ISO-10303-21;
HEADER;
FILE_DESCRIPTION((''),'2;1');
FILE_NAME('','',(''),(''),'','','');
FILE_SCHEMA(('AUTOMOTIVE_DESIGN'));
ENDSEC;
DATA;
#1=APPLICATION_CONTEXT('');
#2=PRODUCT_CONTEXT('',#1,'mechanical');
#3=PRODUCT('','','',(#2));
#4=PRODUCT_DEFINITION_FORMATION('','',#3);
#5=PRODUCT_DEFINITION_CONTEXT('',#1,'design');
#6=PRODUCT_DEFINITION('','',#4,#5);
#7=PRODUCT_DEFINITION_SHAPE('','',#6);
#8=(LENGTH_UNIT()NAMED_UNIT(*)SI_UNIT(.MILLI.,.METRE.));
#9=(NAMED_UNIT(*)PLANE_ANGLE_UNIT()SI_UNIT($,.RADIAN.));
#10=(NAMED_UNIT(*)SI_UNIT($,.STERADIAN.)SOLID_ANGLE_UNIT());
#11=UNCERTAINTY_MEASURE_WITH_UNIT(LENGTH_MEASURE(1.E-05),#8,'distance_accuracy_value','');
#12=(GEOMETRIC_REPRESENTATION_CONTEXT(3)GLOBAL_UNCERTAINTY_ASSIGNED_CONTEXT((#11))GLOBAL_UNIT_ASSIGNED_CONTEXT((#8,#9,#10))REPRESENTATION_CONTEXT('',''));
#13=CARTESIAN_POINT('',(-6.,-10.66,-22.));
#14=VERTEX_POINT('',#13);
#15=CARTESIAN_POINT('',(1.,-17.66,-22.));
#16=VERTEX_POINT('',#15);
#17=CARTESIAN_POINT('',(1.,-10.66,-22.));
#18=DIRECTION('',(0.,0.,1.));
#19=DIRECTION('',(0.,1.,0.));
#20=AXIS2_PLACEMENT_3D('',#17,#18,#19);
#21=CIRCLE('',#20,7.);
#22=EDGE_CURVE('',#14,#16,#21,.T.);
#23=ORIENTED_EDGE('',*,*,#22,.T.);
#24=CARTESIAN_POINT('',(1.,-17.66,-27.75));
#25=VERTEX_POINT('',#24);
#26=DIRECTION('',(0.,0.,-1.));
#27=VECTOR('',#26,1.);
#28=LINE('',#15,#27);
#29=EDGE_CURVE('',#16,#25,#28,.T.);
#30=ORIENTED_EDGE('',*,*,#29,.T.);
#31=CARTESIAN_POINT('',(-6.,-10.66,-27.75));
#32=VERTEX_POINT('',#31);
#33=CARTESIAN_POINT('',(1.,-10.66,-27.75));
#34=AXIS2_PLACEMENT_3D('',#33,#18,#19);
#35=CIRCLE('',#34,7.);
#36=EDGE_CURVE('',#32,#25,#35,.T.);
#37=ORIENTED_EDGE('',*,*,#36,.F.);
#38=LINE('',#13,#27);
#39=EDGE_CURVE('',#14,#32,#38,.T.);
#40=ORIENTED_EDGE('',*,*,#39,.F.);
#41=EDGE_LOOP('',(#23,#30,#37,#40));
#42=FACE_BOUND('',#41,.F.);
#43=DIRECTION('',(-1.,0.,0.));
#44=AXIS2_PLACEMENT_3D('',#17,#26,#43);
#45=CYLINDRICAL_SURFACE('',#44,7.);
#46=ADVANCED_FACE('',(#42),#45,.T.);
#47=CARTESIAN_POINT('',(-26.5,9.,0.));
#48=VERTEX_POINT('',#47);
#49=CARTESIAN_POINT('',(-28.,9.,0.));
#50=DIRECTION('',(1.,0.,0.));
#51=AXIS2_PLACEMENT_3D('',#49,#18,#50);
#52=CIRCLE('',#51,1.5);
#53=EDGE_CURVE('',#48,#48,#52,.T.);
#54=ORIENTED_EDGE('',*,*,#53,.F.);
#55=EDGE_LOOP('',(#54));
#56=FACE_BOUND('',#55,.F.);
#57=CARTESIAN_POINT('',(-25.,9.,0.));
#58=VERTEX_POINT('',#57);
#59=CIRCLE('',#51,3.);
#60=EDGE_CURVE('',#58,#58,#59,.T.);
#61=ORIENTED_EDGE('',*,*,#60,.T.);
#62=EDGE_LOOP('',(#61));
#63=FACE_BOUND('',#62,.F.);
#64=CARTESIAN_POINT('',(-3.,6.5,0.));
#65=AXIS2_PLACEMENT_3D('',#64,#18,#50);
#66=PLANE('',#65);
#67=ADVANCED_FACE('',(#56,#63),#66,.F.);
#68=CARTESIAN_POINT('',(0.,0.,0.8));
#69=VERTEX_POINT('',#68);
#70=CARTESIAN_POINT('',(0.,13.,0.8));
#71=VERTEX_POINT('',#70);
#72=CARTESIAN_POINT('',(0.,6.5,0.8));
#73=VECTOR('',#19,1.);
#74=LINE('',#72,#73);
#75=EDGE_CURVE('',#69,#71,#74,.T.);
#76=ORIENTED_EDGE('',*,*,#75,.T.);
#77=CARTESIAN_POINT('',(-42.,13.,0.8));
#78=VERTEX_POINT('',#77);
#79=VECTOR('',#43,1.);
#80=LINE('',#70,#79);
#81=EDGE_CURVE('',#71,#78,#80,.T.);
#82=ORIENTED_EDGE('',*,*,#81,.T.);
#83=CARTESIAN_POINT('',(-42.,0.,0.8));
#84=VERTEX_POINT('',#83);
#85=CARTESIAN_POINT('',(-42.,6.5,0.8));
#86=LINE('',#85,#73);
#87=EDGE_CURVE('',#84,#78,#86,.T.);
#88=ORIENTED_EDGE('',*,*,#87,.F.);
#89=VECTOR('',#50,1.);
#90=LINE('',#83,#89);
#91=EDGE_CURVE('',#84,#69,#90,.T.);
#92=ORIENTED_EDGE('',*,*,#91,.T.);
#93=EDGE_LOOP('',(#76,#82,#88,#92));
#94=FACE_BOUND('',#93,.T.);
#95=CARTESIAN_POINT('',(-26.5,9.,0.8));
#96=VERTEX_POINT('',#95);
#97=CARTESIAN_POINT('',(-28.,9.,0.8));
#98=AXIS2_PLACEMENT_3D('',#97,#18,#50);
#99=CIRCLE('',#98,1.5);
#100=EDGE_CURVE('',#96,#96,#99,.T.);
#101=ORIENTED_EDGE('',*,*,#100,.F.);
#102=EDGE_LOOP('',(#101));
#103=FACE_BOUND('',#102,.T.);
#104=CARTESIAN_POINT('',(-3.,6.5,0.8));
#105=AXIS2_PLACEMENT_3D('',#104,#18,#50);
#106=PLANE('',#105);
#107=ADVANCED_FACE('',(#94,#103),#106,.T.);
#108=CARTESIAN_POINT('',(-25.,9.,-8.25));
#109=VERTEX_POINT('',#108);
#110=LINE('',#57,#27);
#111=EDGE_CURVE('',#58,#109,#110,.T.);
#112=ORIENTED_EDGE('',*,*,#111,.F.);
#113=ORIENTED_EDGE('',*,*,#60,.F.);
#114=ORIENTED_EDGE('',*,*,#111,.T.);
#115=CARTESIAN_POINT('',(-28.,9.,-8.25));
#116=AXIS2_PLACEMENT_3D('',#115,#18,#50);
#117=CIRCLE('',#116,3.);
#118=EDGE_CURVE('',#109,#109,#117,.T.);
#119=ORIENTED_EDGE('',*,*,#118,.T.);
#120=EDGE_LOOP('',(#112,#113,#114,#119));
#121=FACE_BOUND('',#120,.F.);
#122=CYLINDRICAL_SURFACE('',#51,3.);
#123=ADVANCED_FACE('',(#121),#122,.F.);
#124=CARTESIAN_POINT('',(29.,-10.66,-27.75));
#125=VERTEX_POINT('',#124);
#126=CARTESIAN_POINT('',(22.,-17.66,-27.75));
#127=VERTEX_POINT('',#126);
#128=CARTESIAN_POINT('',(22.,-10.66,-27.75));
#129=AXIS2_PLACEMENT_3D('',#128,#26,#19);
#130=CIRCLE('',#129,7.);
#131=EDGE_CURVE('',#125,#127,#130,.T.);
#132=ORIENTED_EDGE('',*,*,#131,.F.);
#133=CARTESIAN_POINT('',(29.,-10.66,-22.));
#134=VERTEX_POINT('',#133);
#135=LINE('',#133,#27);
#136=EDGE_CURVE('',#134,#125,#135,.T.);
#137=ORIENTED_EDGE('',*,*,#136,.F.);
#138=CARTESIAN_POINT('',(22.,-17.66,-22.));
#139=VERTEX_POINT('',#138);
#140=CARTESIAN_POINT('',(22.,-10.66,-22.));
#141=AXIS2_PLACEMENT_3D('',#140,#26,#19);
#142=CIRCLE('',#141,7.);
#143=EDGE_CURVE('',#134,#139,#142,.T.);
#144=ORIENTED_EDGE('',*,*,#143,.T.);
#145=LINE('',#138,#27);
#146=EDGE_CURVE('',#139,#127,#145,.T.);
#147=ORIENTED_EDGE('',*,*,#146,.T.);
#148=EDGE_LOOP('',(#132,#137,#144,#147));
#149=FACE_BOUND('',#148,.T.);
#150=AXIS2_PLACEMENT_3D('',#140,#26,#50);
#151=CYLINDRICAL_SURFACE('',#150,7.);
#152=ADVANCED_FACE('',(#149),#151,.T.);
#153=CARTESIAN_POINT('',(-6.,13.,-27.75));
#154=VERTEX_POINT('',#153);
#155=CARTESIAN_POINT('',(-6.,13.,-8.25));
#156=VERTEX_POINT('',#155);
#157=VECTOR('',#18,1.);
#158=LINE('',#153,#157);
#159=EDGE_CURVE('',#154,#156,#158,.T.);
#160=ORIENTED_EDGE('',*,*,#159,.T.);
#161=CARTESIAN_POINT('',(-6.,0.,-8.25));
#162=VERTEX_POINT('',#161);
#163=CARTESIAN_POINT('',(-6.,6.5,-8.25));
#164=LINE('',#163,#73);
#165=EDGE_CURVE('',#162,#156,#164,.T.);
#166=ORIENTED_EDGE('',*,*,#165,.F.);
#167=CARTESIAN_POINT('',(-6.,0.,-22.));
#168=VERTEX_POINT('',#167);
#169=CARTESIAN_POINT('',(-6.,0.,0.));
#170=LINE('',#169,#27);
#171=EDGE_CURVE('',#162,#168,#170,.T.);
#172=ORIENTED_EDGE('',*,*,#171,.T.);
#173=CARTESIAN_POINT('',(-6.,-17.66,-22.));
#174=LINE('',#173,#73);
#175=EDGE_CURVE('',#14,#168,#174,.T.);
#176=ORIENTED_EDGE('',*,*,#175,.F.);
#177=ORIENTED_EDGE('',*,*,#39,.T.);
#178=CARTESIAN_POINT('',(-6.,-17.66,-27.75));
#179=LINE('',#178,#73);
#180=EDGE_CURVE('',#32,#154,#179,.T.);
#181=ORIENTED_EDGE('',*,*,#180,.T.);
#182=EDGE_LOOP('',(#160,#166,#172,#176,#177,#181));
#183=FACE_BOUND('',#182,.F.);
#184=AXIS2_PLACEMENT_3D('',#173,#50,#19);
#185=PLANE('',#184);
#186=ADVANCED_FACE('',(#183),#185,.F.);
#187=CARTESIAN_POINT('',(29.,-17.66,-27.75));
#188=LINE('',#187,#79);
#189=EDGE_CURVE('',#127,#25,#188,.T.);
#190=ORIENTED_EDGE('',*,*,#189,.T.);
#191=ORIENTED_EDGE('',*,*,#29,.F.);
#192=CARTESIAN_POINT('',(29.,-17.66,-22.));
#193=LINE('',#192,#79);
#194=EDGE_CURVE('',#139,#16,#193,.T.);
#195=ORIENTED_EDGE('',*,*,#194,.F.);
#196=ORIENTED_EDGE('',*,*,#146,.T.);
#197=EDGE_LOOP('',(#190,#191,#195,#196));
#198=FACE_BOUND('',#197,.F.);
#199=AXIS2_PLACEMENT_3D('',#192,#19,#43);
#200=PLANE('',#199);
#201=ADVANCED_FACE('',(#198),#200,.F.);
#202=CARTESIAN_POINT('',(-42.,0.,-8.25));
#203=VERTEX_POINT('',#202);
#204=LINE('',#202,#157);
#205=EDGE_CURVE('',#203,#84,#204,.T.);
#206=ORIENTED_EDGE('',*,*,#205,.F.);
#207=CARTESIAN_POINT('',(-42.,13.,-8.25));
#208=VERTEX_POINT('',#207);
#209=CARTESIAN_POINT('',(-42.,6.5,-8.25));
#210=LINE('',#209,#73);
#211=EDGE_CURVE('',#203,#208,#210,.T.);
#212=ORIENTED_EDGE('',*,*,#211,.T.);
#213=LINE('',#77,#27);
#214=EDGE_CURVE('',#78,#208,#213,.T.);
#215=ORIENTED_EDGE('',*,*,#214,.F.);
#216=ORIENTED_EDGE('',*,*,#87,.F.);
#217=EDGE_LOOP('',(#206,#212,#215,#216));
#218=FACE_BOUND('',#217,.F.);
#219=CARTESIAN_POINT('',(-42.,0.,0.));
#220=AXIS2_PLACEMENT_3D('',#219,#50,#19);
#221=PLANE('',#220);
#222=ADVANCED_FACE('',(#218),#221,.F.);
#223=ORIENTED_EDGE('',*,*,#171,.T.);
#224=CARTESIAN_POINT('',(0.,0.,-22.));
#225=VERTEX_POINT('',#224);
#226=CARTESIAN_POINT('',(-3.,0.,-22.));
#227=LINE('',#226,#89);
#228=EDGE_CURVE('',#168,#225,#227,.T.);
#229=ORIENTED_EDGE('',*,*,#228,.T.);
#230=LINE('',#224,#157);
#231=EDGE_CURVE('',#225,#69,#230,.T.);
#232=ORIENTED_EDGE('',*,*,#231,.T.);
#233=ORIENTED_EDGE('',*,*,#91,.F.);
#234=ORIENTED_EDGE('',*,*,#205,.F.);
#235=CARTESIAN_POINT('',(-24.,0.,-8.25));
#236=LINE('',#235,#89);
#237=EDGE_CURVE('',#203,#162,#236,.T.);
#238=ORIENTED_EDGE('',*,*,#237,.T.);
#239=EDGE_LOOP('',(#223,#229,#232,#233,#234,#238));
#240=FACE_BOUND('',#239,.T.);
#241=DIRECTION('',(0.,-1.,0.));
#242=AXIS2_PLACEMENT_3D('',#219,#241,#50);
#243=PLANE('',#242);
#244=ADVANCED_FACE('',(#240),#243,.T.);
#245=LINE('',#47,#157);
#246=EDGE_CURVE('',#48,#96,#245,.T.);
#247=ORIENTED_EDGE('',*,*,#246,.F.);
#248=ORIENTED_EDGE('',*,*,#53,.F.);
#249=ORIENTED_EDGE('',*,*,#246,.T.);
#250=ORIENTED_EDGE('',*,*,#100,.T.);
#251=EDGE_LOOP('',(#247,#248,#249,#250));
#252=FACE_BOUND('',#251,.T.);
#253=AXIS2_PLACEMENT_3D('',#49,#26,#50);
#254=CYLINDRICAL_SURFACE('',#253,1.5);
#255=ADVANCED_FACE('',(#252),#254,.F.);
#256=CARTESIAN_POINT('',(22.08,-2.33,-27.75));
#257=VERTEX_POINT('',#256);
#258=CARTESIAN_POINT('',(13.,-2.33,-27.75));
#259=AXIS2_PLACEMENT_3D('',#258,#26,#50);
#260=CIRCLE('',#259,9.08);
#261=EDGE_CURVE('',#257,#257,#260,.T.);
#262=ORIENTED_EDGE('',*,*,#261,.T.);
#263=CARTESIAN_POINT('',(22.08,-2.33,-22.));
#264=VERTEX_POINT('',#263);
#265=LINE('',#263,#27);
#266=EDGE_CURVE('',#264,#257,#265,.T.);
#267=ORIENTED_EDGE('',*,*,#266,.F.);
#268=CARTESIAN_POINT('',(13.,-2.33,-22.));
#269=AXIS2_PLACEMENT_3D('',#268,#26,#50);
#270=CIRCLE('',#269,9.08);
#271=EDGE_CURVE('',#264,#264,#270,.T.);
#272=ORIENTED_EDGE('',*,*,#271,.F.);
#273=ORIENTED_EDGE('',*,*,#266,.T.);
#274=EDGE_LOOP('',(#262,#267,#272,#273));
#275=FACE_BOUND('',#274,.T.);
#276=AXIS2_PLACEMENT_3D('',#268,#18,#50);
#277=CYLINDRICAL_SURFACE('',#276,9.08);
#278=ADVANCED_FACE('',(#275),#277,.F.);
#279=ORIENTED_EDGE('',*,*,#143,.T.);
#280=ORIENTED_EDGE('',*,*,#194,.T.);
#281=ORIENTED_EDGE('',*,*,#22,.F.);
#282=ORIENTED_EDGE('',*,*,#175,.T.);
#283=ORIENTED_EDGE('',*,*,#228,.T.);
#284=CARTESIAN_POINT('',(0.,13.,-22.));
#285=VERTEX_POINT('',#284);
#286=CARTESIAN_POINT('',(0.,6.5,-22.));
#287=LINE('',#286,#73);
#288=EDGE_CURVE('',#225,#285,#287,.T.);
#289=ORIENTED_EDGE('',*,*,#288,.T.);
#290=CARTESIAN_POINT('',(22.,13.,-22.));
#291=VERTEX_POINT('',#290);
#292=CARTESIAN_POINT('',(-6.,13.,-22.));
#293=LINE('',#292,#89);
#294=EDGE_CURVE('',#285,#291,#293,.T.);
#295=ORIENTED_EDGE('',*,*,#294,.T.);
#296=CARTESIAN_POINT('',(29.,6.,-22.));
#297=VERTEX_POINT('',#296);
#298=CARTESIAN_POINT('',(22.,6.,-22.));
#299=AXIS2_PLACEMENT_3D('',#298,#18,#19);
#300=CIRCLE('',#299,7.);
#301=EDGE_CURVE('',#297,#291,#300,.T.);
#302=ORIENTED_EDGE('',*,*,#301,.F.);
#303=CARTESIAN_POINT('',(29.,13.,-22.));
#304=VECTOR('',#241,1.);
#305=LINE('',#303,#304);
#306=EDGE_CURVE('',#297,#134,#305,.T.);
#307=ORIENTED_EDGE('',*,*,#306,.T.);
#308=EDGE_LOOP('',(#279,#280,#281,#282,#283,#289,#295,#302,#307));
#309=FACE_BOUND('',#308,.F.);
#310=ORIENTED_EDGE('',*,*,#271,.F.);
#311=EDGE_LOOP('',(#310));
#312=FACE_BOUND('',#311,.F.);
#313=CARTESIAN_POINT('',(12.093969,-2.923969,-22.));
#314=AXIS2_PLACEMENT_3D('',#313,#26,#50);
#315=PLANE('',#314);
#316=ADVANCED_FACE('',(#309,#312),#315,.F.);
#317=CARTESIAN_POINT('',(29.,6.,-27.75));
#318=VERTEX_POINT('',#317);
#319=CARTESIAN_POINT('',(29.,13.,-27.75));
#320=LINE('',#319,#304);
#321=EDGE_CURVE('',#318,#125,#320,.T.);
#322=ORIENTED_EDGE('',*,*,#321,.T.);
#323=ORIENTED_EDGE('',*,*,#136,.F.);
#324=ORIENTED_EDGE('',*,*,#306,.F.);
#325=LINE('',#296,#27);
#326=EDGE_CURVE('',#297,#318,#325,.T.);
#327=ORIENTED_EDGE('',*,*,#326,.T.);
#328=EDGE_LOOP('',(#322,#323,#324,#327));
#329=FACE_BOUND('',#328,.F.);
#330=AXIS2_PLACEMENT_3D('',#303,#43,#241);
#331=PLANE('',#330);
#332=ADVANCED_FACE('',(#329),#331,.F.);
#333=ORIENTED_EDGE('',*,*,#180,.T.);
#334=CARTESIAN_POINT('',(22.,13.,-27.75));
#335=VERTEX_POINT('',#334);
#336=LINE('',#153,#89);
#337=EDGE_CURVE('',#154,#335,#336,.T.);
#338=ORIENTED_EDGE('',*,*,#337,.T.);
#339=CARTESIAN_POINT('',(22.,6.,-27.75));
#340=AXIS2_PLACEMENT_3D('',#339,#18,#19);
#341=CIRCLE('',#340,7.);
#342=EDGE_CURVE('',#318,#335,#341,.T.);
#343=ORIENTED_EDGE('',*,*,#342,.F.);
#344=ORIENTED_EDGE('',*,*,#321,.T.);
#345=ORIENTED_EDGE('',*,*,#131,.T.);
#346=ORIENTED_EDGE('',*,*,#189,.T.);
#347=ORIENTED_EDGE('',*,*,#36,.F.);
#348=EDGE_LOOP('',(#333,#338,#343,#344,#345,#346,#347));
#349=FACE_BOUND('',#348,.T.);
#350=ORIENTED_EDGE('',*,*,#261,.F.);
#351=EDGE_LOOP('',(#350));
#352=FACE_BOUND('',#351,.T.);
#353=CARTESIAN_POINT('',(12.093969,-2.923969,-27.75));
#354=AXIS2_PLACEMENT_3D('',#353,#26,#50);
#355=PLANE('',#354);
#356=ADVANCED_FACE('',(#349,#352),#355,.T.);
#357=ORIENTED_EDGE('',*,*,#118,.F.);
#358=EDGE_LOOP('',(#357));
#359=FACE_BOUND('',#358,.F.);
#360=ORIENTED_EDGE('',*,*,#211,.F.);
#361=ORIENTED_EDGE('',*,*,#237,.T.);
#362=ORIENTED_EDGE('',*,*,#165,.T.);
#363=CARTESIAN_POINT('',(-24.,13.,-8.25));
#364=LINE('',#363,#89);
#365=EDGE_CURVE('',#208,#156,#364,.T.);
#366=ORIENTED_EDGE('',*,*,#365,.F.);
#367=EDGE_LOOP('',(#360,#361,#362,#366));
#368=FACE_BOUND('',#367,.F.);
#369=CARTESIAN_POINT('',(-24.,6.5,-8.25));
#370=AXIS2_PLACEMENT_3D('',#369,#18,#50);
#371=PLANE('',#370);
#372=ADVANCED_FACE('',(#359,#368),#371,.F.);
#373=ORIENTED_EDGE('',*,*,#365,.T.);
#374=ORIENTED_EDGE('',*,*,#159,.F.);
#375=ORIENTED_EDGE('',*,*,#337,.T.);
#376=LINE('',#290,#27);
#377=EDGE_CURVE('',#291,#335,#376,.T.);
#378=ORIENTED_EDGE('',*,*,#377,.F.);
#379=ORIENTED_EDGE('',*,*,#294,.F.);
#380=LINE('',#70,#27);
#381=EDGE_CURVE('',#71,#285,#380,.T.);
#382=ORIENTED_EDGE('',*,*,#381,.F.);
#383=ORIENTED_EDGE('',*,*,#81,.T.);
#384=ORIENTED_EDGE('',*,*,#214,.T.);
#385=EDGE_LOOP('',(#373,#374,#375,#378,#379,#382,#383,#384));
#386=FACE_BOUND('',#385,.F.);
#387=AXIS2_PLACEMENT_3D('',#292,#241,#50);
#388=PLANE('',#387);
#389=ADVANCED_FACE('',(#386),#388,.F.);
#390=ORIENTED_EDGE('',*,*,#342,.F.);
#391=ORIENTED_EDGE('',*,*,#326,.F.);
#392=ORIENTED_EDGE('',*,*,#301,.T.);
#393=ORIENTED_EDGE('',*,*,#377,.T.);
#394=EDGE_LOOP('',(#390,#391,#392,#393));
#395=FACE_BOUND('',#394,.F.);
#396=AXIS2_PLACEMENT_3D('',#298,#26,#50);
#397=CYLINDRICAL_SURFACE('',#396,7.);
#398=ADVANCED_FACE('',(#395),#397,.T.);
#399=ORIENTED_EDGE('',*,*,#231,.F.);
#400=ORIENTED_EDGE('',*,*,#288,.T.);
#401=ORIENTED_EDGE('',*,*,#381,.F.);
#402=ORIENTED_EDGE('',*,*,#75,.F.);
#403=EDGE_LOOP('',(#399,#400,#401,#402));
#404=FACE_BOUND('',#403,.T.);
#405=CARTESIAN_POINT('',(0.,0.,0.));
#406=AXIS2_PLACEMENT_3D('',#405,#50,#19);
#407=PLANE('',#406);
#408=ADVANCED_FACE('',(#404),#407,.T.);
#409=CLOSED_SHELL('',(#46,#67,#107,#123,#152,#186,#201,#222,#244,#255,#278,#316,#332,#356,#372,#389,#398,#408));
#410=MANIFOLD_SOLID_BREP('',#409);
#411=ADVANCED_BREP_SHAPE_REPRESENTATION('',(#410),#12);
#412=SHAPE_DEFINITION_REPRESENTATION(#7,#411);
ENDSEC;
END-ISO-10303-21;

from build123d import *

# Parameters (mm, degrees)
F0_W     = 6
F0_H     = 13
F0_W_2   = 36
F0_R     = 3
F0_R_2   = 1.5
F1_DEPTH = 0.8
F2_DEPTH = 22
F3_DEPTH = 8.25
F4_R     = 13
F4_W     = 6
F4_H     = 13
F4_R_2   = 9.08
F5_DEPTH = 5.75
F6_R     = 7


# Not quite as in the source:
# - a feature names something its author has since deleted; it is built from what else it names


with BuildPart() as f1:
    # F0 (on Top) → F1 (new body)
    with BuildSketch(Plane.XY):
        with Locations((-3, 6.5)):
            Rectangle(F0_W, F0_H)
        with Locations((-24, 6.5)):
            Rectangle(F0_W_2, F0_H)
        with Locations((-28, 9)):
            Circle(F0_R, mode=Mode.SUBTRACT)
        with Locations((-28, 9)):
            Circle(F0_R)
        with Locations((-28, 9)):
            Circle(F0_R_2, mode=Mode.SUBTRACT)
    extrude(amount=F1_DEPTH)

    # F0 (on Top) → F2 (join)
    with BuildSketch(Plane.XY):
        with Locations((-3, 6.5)):
            Rectangle(F0_W, F0_H)
    extrude(amount=-F2_DEPTH)

    # F0 (on Top) → F3 (join)
    with BuildSketch(Plane.XY):
        with Locations((-24, 6.5)):
            Rectangle(F0_W_2, F0_H)
        with Locations((-28, 9)):
            Circle(F0_R, mode=Mode.SUBTRACT)
    extrude(amount=-F3_DEPTH)

    # F4 (on face) → F5 (join)
    with BuildSketch(Plane(origin=(0, 0, -22), x_dir=(1, 0, 0), z_dir=(0, 0, -1))):
        Polygon((29, 17.66), (-6, 17.66), (-6, 0), (0, 0), (0, -13), (17.6005885005, -13), (29, -13), align=None)
        with Locations((13, 2.33)):
            Circle(F4_R, mode=Mode.SUBTRACT)
        with Locations((-3, -6.5)):
            Rectangle(F4_W, F4_H)
        with Locations((13, 2.33)):
            Circle(F4_R)
        with Locations((13, 2.33)):
            Circle(F4_R_2, mode=Mode.SUBTRACT)
    extrude(amount=F5_DEPTH)

    # F6
    f6_edges = [f1.edges().sort_by_distance(p)[0] for p in [
        (-6, -17.66, -24.875),
        (29, -17.66, -24.875),
        (29, 13, -24.875),
    ]]
    fillet(f6_edges, radius=F6_R)


solid = f1.part
